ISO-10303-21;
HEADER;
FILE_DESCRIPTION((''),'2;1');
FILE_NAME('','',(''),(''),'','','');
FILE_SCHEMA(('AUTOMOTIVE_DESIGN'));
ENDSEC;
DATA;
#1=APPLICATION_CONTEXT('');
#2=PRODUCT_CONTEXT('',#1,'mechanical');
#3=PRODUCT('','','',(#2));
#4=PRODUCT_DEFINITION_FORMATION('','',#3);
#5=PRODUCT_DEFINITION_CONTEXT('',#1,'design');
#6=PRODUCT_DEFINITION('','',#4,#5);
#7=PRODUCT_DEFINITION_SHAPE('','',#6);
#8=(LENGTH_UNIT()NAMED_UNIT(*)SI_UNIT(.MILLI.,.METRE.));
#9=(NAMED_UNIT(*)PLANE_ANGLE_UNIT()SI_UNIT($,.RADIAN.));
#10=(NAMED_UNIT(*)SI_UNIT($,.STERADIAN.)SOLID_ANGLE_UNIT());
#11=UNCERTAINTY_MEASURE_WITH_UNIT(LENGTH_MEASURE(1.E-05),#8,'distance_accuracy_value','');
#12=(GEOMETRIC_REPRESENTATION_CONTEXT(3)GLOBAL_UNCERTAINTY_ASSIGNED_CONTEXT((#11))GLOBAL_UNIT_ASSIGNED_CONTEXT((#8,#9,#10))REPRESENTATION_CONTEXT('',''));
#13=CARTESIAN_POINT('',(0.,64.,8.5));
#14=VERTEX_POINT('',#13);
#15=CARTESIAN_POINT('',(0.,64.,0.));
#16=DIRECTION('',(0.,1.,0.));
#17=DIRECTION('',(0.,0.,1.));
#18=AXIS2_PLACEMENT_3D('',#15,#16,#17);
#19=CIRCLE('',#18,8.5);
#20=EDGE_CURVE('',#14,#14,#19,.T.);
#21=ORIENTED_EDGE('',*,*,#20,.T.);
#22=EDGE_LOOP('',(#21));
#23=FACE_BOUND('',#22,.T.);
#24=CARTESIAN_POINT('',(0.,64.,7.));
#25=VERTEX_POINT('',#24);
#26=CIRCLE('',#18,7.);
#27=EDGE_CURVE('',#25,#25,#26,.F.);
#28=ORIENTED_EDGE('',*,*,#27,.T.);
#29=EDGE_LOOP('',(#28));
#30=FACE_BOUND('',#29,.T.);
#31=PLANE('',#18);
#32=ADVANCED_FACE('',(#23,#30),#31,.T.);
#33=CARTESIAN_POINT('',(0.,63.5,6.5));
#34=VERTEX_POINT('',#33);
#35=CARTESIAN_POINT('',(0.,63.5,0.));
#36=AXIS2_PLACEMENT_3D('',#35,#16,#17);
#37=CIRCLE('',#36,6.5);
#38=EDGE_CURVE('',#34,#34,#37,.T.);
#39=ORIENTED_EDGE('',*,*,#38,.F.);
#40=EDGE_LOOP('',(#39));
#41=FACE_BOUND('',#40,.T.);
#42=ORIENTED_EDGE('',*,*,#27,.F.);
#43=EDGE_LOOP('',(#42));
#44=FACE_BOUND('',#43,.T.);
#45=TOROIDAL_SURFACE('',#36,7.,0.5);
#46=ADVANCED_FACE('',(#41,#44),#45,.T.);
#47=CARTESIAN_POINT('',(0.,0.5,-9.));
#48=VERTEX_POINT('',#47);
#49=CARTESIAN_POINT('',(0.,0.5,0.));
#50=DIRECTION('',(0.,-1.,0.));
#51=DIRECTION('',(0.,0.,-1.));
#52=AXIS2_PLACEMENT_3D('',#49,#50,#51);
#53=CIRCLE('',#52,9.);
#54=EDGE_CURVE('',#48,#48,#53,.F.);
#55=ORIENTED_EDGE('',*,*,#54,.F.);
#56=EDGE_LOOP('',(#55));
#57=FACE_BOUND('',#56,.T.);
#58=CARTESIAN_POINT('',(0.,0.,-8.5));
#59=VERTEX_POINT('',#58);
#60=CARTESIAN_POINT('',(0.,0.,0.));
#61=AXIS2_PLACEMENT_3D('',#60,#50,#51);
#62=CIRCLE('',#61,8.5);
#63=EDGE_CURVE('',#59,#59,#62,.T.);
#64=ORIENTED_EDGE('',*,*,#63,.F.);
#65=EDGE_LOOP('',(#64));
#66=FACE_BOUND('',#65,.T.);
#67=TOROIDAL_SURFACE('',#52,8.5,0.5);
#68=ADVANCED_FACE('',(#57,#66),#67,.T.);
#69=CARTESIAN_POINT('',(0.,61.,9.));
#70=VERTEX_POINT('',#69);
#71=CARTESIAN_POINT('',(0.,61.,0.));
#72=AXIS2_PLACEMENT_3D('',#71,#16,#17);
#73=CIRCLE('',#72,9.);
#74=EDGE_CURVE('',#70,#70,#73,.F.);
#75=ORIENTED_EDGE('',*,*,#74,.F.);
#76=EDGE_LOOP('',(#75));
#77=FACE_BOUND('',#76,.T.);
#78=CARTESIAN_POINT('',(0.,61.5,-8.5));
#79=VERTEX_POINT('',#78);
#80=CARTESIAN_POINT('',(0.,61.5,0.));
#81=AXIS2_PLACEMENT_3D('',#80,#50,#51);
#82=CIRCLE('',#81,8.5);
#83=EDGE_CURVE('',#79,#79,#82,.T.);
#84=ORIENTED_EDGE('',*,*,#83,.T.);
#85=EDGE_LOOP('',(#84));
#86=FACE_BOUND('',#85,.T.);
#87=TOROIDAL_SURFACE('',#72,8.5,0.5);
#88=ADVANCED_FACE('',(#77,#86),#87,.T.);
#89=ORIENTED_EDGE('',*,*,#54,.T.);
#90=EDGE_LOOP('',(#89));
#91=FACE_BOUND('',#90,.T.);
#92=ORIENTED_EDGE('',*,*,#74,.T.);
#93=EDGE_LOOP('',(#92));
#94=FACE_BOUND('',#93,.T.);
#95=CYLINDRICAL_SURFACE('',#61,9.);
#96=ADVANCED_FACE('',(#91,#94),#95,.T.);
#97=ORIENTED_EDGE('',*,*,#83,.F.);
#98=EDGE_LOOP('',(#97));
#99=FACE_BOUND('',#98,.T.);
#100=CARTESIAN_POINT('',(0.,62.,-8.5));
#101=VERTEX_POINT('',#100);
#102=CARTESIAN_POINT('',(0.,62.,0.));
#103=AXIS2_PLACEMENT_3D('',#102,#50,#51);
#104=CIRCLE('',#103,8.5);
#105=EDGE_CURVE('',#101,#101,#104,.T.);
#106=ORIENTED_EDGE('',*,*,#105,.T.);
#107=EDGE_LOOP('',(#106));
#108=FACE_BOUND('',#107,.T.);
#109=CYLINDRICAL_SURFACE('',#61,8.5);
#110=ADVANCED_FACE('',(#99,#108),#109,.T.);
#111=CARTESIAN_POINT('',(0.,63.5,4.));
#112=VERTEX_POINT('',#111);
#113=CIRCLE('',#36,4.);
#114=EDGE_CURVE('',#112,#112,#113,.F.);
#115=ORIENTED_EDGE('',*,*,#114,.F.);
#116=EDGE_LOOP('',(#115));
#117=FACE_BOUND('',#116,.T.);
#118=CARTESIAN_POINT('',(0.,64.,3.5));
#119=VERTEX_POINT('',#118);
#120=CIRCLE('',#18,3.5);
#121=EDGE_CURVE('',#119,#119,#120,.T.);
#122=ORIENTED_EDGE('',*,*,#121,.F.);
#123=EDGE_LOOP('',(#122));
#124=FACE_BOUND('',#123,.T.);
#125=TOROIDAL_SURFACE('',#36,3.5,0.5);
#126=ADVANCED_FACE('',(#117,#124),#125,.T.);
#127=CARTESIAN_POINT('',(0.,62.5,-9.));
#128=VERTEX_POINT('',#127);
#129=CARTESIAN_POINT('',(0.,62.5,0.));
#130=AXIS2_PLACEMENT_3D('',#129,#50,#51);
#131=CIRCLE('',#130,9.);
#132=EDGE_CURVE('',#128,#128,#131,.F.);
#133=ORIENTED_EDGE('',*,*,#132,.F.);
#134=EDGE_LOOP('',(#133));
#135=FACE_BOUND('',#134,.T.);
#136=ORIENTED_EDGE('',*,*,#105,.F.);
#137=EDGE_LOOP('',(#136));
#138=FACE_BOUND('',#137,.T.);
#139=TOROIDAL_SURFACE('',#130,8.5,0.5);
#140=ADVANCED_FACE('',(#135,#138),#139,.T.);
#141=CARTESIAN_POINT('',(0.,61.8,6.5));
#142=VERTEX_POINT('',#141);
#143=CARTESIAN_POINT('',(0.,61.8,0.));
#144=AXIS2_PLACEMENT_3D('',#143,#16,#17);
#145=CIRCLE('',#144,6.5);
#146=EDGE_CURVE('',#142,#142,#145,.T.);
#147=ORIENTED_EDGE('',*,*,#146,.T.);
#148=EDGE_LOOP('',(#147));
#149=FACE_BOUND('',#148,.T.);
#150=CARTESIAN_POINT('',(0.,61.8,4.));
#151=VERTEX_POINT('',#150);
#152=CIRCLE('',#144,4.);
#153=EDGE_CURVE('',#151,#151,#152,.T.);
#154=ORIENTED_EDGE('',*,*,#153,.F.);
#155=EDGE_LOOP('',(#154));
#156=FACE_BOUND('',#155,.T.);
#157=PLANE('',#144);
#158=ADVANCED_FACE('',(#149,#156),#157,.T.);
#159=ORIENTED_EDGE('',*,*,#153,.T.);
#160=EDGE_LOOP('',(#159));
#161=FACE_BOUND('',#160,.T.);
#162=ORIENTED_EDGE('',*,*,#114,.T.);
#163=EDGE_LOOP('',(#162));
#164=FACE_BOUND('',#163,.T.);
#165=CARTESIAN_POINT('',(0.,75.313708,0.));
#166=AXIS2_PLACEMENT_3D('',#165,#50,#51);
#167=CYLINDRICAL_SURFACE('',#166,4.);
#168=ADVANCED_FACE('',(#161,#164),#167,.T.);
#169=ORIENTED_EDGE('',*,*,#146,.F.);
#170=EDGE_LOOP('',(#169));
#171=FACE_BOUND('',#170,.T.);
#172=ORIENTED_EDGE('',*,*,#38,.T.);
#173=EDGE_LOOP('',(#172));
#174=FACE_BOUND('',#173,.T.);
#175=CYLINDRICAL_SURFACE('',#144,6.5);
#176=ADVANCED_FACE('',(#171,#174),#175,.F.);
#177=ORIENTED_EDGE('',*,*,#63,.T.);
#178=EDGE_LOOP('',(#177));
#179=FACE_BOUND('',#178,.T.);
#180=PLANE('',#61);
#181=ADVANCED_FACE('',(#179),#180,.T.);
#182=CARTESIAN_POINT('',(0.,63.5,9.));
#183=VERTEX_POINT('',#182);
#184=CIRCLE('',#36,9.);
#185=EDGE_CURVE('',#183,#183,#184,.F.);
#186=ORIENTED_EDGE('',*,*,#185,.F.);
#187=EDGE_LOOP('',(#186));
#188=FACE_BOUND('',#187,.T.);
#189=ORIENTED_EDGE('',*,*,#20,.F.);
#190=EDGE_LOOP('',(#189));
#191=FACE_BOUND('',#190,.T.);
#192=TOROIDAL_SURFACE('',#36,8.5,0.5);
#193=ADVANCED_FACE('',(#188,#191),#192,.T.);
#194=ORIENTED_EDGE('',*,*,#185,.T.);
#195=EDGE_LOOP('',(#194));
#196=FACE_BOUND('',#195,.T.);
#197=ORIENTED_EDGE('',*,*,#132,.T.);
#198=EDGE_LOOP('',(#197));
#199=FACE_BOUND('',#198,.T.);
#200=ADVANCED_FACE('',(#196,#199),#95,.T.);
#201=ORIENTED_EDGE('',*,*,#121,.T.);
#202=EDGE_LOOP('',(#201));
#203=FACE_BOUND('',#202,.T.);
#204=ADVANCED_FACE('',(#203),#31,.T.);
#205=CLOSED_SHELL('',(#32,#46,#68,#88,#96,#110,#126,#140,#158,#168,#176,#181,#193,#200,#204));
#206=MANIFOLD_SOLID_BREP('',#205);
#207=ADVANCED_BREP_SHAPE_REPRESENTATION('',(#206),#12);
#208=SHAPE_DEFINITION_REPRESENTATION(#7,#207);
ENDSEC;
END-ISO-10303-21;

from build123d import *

# Parameters (mm, degrees)
FILLET1_R           = 0.5
SKETCH4_R           = 6.5
CUT_EXTRUDE1_DEPTH  = 2.2
SKETCH5_R           = 4
BOSS_EXTRUDE1_DEPTH = 2.2
FILLET2_R           = 0.5


with BuildPart() as part:
    # Sketch2 → Revolve1 (revolve)
    with BuildSketch(Plane(origin=(0, 0, 0), x_dir=(0, 0, -1), z_dir=(1, 0, 0))):
        Polygon((9, 62), (8.5, 62), (8.5, 61.5), (9, 61.5), (9, 0), (0, 0), (0, 64), (9, 64), align=None)
    revolve(axis=Axis((0, 0, 0), (0, 1, 0)))

    # Fillet1
    fillet1_edges = [part.edges().sort_by_distance(p)[0] for p in [
        (0, 0, 9),
        (0, 61.5, 9),
        (0, 62, 9),
    ]]
    fillet(fillet1_edges, radius=FILLET1_R - 0.0001)  # a hair under: the kernel refuses the full size

    # Sketch4 → Cut-Extrude1 (cut)
    with BuildSketch(Plane(origin=(0, 64, 0), x_dir=(1, 0, 0), z_dir=(0, 1, 0))):
        with Locations(Location((0, 0, 0), (0, 0, 270))):
            Circle(SKETCH4_R)
    extrude(amount=-CUT_EXTRUDE1_DEPTH, mode=Mode.SUBTRACT)

    # Sketch5 → Boss-Extrude1 (add)
    with BuildSketch(Plane(origin=(0, 61.8, 0), x_dir=(1, 0, 0), z_dir=(0, 1, 0))):
        with Locations(Location((0, 0, 0), (0, 0, 270))):
            Circle(SKETCH5_R)
    extrude(amount=BOSS_EXTRUDE1_DEPTH)

    # Fillet2
    fillet2_edges = [part.edges().sort_by_distance(p)[0] for p in [
        (0, 64, -6.5),
        (0, 64, -4),
        (0, 64, 9),
    ]]
    fillet(fillet2_edges, radius=FILLET2_R)


solid = part.part
